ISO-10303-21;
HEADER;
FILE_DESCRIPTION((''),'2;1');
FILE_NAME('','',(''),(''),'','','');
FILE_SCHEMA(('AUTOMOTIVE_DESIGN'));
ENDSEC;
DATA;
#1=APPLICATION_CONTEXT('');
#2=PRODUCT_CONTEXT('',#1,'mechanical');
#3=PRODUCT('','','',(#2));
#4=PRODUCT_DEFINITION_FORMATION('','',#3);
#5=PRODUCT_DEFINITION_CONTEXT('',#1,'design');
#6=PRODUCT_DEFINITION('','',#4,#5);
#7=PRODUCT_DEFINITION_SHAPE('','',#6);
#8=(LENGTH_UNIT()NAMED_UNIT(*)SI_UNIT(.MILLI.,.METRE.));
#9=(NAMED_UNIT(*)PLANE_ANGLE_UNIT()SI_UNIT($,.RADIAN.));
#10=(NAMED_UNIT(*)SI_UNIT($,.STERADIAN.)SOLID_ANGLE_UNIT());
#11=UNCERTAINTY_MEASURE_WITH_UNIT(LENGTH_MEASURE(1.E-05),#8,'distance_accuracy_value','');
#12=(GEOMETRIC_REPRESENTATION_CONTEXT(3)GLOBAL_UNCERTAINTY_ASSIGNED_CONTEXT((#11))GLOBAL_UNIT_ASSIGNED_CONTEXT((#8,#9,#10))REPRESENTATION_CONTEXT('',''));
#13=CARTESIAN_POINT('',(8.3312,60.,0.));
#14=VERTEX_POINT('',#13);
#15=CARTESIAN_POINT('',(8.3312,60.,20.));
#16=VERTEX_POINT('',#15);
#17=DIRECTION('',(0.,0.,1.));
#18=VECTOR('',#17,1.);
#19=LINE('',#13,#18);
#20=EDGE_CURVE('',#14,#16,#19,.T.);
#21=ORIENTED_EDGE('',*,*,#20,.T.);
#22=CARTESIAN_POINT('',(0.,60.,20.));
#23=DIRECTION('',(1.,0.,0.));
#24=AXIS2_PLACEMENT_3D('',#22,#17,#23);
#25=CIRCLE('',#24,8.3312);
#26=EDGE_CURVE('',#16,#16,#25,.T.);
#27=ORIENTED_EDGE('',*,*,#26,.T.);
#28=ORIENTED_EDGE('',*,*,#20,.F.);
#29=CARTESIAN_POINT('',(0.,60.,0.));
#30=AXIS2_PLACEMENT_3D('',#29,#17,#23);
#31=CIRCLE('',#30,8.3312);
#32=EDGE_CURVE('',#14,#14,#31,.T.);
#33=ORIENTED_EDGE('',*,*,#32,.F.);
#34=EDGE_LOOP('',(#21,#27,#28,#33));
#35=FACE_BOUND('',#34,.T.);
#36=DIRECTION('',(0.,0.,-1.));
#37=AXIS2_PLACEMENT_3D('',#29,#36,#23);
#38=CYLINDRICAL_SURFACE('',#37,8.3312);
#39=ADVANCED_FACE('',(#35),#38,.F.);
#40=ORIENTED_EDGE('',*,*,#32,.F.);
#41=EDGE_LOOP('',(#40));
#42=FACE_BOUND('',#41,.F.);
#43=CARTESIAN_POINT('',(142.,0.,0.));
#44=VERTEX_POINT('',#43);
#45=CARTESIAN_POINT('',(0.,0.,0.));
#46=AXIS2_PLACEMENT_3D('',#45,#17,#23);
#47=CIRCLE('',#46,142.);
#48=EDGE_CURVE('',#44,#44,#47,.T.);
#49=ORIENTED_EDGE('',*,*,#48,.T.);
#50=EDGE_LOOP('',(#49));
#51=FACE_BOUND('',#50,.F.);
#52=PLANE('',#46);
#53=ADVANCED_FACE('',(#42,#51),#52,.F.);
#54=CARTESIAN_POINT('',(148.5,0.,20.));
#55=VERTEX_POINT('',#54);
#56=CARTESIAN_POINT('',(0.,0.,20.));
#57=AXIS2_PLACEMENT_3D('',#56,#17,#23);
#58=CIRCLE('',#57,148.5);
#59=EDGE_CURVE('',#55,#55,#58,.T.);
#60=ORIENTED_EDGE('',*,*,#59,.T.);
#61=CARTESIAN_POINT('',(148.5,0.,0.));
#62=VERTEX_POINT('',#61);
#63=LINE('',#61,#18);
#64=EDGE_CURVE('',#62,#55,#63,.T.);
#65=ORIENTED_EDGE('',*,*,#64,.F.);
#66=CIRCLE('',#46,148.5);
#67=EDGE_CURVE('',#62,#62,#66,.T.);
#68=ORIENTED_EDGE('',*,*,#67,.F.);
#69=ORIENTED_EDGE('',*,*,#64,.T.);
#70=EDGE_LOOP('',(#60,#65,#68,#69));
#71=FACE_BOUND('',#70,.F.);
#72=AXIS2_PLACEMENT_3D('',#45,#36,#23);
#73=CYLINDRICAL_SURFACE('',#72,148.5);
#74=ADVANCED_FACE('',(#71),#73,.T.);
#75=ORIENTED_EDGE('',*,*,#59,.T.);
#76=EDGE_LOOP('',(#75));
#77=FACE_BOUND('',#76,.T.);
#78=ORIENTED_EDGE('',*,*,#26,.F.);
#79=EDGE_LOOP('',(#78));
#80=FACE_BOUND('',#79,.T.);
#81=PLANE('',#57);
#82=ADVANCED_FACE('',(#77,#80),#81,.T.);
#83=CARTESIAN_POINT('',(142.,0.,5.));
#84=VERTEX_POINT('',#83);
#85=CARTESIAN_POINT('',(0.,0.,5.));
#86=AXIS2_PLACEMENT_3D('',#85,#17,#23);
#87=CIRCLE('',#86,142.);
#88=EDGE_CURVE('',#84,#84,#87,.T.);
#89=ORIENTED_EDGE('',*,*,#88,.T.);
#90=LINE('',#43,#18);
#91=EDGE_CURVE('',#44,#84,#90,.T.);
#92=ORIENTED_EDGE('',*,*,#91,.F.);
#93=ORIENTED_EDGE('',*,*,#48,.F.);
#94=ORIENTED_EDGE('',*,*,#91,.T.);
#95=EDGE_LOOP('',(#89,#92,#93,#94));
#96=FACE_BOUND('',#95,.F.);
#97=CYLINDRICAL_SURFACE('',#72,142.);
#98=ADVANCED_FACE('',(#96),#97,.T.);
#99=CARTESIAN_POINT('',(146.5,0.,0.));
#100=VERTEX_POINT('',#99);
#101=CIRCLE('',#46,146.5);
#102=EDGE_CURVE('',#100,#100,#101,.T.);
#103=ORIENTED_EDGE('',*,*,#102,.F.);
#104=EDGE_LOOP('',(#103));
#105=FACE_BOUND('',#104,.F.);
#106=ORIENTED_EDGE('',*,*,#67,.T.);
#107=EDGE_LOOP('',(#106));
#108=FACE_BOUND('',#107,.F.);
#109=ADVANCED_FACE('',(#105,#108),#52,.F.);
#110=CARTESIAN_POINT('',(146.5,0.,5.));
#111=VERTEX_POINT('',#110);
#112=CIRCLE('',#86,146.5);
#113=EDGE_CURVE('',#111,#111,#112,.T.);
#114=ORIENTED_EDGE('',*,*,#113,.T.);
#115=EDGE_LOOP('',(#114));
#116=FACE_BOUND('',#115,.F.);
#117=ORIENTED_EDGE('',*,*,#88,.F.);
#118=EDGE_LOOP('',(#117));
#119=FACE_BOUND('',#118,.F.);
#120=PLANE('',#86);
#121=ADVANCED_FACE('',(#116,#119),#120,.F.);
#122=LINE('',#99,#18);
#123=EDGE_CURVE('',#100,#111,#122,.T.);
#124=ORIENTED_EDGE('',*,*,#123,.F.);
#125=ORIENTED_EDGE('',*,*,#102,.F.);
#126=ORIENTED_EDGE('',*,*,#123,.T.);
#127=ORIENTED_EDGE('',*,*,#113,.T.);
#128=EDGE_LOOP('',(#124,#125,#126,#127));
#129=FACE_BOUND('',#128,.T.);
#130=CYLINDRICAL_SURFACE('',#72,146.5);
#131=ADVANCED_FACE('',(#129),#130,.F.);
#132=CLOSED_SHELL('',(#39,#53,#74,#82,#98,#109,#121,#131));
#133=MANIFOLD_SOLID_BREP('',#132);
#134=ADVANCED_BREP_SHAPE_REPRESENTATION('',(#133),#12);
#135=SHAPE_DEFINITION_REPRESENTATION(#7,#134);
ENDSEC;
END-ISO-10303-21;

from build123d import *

# Parameters (mm, degrees)
F0_R     = 148.5
F0_R_2   = 8.3312
F1_DEPTH = 20
F2_R     = 146.5
F2_R_2   = 142
F3_DEPTH = 5


# Not quite as in the source:
# - a feature names something its author has since deleted; it is built from what else it names


with BuildPart() as f1:
    # F0 (on Top) → F1 (new body)
    with BuildSketch(Plane.XY):
        Circle(F0_R)
        with Locations((0, 60)):
            Circle(F0_R_2, mode=Mode.SUBTRACT)
    extrude(amount=F1_DEPTH)

    # F2 (on face) → F3 (cut)
    with BuildSketch(Plane.XY):
        Circle(F2_R)
        Circle(F2_R_2, mode=Mode.SUBTRACT)
    extrude(amount=F3_DEPTH, mode=Mode.SUBTRACT)


solid = f1.part
